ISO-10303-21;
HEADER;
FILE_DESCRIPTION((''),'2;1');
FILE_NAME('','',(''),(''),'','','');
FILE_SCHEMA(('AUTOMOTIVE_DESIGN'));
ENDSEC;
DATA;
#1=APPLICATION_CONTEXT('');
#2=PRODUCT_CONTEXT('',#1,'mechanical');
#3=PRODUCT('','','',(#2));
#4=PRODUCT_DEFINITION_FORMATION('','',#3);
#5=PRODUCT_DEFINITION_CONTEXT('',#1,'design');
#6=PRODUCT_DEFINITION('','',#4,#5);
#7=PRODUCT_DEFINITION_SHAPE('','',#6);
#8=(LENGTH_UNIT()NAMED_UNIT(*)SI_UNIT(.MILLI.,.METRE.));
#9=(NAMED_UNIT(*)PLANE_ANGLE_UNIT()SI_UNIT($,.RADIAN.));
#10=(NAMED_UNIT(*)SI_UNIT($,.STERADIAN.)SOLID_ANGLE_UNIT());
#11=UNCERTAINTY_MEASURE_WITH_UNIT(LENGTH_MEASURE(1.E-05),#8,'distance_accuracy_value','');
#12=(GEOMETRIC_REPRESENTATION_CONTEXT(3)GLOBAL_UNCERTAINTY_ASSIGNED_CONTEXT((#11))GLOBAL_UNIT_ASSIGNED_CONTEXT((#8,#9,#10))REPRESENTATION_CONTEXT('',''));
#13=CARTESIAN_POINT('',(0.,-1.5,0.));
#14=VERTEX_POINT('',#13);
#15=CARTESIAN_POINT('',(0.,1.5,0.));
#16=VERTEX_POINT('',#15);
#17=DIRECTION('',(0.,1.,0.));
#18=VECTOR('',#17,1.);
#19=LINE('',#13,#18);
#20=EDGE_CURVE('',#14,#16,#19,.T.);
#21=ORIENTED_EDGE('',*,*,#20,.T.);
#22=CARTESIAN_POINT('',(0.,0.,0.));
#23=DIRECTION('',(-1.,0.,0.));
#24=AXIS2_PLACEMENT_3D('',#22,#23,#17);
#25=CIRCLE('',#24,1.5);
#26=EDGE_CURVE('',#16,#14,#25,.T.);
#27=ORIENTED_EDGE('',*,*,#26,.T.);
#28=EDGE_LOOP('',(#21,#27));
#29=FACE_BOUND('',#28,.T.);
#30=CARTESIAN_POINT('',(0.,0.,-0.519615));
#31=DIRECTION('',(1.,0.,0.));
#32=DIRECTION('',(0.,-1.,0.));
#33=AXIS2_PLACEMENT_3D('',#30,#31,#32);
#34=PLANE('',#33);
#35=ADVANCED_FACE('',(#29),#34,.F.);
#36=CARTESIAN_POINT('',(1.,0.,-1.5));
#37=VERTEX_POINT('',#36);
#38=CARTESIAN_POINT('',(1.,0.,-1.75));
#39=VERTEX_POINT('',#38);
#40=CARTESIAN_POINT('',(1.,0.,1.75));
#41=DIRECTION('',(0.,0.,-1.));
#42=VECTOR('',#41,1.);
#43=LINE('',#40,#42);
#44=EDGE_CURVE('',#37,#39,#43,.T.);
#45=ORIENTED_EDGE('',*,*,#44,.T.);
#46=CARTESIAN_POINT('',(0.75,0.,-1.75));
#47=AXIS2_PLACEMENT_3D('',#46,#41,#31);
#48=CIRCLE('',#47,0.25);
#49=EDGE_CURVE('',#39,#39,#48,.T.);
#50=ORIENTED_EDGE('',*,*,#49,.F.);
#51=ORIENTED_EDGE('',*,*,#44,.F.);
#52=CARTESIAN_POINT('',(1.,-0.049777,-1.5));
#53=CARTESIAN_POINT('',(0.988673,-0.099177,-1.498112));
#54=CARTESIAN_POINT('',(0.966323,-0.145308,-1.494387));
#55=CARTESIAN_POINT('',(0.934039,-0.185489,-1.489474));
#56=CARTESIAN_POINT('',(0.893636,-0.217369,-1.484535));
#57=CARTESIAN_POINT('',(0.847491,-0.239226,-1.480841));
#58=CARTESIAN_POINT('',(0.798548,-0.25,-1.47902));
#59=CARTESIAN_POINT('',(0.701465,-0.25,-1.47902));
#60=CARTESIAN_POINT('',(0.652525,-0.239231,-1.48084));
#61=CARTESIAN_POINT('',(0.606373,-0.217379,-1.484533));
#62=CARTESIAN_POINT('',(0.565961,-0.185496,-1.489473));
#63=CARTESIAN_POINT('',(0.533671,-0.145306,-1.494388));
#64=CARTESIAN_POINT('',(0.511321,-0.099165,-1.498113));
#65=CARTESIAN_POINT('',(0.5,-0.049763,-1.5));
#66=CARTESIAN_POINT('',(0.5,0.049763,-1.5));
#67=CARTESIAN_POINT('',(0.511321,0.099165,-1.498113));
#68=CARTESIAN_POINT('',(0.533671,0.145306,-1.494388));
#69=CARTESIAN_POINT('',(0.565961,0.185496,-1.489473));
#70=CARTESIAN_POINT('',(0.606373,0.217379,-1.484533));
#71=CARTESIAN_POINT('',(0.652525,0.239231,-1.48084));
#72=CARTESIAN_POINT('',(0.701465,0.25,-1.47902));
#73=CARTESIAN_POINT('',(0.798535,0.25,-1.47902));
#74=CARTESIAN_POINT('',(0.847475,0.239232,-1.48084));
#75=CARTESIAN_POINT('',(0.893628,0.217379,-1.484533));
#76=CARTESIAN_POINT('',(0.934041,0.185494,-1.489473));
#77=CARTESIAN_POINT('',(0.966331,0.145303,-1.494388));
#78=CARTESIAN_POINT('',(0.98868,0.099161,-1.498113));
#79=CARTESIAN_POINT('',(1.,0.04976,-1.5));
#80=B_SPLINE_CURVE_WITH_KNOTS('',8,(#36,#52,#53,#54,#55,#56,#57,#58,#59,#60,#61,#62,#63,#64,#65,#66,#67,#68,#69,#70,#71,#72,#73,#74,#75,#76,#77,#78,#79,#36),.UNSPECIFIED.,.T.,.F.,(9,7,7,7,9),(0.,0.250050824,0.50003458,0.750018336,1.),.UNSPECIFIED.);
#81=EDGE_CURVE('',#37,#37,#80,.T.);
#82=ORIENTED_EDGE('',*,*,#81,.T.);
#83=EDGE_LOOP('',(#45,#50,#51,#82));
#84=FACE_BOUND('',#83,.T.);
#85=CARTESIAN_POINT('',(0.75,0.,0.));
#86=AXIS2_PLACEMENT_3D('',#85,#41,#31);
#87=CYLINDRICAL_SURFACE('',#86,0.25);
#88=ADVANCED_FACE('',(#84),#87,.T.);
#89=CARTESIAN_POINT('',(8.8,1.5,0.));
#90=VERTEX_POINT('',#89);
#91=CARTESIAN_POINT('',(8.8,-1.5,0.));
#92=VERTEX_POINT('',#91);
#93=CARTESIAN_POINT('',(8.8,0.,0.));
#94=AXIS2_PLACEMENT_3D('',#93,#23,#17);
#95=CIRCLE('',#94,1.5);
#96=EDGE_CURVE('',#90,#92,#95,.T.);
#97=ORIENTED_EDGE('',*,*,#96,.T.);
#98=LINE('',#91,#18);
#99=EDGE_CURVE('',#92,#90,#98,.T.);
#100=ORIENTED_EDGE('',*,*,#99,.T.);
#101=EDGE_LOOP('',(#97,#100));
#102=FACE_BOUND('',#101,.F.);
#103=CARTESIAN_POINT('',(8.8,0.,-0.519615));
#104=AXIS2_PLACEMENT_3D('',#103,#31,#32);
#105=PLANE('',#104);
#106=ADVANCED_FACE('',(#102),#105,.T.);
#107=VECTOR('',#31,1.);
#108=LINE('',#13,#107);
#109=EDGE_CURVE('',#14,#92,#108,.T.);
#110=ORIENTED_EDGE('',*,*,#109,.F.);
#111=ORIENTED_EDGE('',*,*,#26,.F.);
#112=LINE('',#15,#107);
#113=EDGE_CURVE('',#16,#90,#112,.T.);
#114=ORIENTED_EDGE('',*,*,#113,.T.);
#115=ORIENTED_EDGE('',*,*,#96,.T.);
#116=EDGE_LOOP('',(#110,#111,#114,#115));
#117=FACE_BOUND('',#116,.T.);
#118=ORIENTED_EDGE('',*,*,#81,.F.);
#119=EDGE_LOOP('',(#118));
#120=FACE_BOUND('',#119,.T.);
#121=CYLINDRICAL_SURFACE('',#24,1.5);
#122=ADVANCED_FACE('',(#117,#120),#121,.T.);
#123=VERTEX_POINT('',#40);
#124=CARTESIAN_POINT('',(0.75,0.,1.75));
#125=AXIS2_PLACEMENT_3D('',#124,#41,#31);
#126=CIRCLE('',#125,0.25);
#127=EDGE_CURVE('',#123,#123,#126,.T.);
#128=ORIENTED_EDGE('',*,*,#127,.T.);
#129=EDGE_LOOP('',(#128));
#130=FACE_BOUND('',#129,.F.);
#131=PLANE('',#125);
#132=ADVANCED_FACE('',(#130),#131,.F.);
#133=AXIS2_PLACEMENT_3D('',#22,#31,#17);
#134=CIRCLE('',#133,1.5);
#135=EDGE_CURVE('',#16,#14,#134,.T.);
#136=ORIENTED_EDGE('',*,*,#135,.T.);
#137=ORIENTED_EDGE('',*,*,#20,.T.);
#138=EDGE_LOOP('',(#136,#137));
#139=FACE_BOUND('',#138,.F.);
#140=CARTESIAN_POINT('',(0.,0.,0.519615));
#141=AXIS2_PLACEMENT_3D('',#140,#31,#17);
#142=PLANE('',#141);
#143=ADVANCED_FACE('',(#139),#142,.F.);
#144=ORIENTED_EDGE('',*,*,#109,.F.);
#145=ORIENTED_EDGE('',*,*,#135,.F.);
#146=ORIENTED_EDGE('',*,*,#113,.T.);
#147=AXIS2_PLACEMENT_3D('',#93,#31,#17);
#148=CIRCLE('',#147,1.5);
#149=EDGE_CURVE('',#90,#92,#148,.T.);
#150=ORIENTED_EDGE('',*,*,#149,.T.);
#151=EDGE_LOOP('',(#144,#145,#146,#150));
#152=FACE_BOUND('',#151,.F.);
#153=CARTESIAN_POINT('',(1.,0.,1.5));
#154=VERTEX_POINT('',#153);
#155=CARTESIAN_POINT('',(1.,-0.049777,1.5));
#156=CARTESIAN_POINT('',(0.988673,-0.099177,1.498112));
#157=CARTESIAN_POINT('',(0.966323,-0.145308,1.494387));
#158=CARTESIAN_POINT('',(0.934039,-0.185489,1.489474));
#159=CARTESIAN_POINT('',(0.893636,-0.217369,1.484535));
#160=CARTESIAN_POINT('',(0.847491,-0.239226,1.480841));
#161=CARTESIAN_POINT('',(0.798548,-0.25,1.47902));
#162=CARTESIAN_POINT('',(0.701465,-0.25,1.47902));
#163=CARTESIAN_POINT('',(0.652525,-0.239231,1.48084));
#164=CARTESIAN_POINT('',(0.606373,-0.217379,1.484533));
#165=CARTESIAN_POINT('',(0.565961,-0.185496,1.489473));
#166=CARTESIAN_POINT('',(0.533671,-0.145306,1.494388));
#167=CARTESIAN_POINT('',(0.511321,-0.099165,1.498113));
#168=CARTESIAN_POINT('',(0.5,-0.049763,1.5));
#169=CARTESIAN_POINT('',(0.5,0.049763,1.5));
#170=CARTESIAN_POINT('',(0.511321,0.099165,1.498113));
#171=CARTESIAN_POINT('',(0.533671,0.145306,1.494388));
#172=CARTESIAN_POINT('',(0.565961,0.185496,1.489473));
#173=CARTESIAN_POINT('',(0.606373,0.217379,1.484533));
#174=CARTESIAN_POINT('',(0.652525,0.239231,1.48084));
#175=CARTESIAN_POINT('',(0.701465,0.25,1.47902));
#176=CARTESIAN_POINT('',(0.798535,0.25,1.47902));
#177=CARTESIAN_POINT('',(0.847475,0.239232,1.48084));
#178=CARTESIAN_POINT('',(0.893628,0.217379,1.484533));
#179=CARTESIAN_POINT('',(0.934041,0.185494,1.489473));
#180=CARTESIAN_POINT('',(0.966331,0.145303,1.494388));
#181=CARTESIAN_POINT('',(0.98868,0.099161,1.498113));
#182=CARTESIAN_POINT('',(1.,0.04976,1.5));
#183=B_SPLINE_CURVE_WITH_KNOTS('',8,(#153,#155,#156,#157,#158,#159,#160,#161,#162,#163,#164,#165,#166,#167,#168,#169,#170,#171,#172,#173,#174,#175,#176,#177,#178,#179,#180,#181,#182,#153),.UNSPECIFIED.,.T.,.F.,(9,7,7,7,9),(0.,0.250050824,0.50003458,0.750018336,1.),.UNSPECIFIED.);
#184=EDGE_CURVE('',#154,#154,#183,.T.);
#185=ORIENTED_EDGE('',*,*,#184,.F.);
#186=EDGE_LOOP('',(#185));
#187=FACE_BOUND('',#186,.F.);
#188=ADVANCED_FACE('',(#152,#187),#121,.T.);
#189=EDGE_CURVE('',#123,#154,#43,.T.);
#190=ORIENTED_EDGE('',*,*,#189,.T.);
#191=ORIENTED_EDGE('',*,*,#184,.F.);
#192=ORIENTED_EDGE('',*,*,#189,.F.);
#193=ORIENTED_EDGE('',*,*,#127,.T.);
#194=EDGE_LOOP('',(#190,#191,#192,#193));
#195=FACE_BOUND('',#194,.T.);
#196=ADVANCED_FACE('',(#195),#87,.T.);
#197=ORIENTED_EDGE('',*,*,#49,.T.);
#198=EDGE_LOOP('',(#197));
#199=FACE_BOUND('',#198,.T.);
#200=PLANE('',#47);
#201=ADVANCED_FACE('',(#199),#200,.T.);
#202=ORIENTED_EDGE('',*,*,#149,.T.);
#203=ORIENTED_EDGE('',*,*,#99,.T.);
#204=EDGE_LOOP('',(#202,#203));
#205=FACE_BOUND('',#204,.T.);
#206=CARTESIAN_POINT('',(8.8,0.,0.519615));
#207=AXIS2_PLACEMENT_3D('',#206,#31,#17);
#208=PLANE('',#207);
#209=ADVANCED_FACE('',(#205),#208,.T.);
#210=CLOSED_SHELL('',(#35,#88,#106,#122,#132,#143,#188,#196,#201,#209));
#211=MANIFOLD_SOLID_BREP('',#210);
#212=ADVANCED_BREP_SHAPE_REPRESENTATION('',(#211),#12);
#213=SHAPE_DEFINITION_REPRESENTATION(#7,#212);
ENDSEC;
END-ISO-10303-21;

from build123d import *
from build123d import SkipClean  # not in build123d's __all__

# Parameters (mm, degrees)
F1_DEPTH = 8.8
F2_R     = 0.25
F3_DEPTH = 1.75


with BuildPart() as f1:
    # F0 (on Right) → F1 (new body)
    with BuildSketch(Plane.YZ):
        with BuildLine():
            Line((-1.5, 0), (1.5, 0))
            ThreePointArc((1.5, 0), (0, 1.5), (-1.5, 0))
        make_face()
    extrude(amount=F1_DEPTH)

    # F2 (on face) → F3 (join, symmetric)
    with BuildSketch(Plane(origin=(0, 0, 0), x_dir=(1, 0, 0), z_dir=(0, 0, -1))):
        with Locations((0.75, 0)):
            Circle(F2_R)
    extrude(amount=F3_DEPTH, both=True)

    # F4: F1 across plane


with BuildPart() as f1_1:
    add(f1.part, clean=False)
    with SkipClean():  # cleaning this boolean's faces spoils the solid; the shape is the same uncleaned
        add(f1.part.mirror(Plane.XY), clean=False)


solid = f1_1.part
